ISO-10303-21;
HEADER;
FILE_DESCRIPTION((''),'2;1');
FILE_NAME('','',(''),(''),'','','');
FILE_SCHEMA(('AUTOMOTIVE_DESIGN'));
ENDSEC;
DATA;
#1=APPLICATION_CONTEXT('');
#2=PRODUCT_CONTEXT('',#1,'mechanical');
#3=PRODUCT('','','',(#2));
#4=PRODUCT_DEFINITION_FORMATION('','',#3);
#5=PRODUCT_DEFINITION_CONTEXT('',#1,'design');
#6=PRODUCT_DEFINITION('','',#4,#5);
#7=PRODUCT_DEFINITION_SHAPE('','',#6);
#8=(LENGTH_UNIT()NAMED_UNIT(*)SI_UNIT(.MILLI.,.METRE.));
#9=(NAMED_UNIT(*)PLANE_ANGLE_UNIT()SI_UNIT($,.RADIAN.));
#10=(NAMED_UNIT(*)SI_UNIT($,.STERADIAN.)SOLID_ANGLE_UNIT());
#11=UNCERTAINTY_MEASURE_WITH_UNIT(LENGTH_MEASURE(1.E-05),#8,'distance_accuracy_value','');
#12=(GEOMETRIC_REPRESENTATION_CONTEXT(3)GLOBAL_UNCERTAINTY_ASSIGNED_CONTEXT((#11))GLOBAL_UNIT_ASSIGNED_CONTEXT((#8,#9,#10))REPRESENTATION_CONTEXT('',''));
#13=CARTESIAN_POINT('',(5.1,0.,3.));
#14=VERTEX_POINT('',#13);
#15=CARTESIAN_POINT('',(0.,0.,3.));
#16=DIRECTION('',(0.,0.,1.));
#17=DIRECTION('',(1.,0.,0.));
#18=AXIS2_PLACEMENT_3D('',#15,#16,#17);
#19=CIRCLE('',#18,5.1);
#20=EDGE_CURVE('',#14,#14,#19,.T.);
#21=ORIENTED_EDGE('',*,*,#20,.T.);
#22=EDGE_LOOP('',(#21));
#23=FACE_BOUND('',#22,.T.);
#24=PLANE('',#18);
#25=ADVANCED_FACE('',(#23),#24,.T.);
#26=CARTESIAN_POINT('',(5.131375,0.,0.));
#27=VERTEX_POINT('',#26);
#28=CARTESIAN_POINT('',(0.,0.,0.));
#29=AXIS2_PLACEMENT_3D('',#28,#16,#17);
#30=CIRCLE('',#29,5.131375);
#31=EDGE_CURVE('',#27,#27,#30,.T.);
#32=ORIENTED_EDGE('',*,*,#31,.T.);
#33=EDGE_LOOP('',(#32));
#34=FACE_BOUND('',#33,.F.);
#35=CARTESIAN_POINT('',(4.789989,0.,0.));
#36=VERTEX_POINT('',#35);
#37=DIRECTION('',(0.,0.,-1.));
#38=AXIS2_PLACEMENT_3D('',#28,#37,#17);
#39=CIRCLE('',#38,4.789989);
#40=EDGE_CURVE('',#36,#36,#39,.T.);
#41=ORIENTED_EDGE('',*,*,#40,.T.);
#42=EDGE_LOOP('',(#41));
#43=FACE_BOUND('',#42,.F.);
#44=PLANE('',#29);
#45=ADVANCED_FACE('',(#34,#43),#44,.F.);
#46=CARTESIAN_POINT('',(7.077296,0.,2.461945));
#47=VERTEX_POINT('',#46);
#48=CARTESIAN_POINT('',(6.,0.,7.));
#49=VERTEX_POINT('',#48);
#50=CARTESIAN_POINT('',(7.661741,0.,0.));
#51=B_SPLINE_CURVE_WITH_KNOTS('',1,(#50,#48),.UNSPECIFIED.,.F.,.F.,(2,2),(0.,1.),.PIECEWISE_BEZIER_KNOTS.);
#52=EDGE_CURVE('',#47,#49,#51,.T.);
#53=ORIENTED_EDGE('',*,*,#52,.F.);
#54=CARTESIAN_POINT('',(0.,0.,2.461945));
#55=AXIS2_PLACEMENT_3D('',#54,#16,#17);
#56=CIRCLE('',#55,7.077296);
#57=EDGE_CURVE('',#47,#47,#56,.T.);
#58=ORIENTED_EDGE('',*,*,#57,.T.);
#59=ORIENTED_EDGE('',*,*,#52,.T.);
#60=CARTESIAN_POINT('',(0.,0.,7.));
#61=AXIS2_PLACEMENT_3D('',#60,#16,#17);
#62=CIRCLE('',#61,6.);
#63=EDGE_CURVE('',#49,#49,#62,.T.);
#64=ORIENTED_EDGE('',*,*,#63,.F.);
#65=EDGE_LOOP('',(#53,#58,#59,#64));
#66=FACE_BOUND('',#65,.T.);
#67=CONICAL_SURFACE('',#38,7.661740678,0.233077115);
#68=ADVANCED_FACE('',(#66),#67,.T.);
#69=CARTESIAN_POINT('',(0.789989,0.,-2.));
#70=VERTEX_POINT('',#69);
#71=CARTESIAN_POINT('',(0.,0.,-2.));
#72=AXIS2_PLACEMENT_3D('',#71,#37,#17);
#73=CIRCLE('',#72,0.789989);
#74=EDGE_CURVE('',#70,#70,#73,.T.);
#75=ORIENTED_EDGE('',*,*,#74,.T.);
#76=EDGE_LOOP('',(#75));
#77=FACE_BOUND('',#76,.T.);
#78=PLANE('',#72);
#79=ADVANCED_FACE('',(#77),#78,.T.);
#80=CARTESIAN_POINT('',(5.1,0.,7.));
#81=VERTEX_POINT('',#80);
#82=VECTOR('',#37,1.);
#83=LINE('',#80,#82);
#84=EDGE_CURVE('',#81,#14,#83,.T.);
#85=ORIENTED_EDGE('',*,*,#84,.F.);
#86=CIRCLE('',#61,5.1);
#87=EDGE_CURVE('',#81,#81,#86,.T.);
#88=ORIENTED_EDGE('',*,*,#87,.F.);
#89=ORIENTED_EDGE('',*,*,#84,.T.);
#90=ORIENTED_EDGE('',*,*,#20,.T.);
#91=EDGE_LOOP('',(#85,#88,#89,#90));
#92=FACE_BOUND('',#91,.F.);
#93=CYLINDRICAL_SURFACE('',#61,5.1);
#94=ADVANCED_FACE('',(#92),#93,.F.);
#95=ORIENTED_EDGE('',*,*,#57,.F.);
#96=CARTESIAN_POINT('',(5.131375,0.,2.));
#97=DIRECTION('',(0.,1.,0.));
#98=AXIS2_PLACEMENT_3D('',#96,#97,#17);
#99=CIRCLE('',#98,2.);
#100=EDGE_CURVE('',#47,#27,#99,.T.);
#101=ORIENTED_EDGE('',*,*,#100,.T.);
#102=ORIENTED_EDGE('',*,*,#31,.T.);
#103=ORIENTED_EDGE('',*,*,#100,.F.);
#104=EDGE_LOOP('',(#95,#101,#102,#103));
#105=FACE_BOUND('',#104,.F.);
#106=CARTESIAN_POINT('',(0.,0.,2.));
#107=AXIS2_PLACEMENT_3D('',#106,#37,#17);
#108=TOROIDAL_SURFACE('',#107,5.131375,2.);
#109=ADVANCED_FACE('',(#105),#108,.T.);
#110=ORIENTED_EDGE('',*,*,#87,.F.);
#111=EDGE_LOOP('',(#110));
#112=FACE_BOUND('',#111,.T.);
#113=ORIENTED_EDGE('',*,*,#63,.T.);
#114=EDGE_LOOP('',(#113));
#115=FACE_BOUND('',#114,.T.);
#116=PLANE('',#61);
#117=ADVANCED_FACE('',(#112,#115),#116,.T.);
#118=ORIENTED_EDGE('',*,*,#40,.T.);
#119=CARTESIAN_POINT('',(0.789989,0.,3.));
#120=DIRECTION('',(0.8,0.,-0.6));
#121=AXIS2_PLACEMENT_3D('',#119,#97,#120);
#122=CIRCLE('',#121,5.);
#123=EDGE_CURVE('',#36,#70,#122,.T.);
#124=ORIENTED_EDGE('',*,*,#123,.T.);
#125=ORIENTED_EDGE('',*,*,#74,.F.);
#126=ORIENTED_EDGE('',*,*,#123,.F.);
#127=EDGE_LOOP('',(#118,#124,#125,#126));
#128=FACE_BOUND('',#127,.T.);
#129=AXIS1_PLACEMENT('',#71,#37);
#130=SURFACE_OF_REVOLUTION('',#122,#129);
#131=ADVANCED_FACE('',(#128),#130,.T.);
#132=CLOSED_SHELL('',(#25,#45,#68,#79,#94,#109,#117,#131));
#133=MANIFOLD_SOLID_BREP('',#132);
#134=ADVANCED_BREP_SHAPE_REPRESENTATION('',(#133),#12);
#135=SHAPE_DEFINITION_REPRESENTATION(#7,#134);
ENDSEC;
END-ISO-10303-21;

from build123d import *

# Parameters (mm, degrees)
F0_R     = 7.6617406775
F2_R     = 6
F4_R     = 2
F5_R     = 4.7899887375
F6_DEPTH = 2
F8_R     = 5.1
F9_DEPTH = 4


# Not quite as in the source:
# - a fillet or chamfer that OpenCascade refuses, or shapes differently, is made with other operations: its cross-section is extruded or revolved along the edge and cut away or added


with BuildPart() as f3:
    # F0 (on Top) → F3 section 0
    with BuildSketch(Plane.XY):
        Circle(F0_R)
    # F2 (on offset) → F3 section 1
    with BuildSketch(Plane.XY.offset(7)):
        Circle(F2_R)
    loft()

    # F4
    f4_edges = [f3.edges().sort_by_distance(p)[0] for p in [
        (-7.661741, 0, 0),
    ]]
    fillet(f4_edges, radius=F4_R)

    # F5 (on face) → F6 (join)
    with BuildSketch(Plane(origin=(0, 0, 0), x_dir=(1, 0, 0), z_dir=(0, 0, -1))):
        Circle(F5_R)
    extrude(amount=F6_DEPTH)

    # F7: fillet of radius 5 on 1 edges, made by hand

    # F7_s1 → F7_t2 (revolve, cut)
    with BuildSketch(Plane.XZ):
        with BuildLine():
            ThreePointArc((4.7899887375, 0), (3.026056715, -1.472135955), (0.7899887375, -2))
            Line((0.7899887375, -2), (4.7899887375, -2))
            Line((4.7899887375, -2), (4.7899887375, 0))
        make_face()
    revolve(axis=Axis((0, 0, -2), (0, 0, -1)), mode=Mode.SUBTRACT)

    # F8 (on face) → F9 (cut)
    with BuildSketch(Plane.XY.offset(7)):
        Circle(F8_R)
    extrude(amount=-F9_DEPTH, mode=Mode.SUBTRACT)


solid = f3.part
